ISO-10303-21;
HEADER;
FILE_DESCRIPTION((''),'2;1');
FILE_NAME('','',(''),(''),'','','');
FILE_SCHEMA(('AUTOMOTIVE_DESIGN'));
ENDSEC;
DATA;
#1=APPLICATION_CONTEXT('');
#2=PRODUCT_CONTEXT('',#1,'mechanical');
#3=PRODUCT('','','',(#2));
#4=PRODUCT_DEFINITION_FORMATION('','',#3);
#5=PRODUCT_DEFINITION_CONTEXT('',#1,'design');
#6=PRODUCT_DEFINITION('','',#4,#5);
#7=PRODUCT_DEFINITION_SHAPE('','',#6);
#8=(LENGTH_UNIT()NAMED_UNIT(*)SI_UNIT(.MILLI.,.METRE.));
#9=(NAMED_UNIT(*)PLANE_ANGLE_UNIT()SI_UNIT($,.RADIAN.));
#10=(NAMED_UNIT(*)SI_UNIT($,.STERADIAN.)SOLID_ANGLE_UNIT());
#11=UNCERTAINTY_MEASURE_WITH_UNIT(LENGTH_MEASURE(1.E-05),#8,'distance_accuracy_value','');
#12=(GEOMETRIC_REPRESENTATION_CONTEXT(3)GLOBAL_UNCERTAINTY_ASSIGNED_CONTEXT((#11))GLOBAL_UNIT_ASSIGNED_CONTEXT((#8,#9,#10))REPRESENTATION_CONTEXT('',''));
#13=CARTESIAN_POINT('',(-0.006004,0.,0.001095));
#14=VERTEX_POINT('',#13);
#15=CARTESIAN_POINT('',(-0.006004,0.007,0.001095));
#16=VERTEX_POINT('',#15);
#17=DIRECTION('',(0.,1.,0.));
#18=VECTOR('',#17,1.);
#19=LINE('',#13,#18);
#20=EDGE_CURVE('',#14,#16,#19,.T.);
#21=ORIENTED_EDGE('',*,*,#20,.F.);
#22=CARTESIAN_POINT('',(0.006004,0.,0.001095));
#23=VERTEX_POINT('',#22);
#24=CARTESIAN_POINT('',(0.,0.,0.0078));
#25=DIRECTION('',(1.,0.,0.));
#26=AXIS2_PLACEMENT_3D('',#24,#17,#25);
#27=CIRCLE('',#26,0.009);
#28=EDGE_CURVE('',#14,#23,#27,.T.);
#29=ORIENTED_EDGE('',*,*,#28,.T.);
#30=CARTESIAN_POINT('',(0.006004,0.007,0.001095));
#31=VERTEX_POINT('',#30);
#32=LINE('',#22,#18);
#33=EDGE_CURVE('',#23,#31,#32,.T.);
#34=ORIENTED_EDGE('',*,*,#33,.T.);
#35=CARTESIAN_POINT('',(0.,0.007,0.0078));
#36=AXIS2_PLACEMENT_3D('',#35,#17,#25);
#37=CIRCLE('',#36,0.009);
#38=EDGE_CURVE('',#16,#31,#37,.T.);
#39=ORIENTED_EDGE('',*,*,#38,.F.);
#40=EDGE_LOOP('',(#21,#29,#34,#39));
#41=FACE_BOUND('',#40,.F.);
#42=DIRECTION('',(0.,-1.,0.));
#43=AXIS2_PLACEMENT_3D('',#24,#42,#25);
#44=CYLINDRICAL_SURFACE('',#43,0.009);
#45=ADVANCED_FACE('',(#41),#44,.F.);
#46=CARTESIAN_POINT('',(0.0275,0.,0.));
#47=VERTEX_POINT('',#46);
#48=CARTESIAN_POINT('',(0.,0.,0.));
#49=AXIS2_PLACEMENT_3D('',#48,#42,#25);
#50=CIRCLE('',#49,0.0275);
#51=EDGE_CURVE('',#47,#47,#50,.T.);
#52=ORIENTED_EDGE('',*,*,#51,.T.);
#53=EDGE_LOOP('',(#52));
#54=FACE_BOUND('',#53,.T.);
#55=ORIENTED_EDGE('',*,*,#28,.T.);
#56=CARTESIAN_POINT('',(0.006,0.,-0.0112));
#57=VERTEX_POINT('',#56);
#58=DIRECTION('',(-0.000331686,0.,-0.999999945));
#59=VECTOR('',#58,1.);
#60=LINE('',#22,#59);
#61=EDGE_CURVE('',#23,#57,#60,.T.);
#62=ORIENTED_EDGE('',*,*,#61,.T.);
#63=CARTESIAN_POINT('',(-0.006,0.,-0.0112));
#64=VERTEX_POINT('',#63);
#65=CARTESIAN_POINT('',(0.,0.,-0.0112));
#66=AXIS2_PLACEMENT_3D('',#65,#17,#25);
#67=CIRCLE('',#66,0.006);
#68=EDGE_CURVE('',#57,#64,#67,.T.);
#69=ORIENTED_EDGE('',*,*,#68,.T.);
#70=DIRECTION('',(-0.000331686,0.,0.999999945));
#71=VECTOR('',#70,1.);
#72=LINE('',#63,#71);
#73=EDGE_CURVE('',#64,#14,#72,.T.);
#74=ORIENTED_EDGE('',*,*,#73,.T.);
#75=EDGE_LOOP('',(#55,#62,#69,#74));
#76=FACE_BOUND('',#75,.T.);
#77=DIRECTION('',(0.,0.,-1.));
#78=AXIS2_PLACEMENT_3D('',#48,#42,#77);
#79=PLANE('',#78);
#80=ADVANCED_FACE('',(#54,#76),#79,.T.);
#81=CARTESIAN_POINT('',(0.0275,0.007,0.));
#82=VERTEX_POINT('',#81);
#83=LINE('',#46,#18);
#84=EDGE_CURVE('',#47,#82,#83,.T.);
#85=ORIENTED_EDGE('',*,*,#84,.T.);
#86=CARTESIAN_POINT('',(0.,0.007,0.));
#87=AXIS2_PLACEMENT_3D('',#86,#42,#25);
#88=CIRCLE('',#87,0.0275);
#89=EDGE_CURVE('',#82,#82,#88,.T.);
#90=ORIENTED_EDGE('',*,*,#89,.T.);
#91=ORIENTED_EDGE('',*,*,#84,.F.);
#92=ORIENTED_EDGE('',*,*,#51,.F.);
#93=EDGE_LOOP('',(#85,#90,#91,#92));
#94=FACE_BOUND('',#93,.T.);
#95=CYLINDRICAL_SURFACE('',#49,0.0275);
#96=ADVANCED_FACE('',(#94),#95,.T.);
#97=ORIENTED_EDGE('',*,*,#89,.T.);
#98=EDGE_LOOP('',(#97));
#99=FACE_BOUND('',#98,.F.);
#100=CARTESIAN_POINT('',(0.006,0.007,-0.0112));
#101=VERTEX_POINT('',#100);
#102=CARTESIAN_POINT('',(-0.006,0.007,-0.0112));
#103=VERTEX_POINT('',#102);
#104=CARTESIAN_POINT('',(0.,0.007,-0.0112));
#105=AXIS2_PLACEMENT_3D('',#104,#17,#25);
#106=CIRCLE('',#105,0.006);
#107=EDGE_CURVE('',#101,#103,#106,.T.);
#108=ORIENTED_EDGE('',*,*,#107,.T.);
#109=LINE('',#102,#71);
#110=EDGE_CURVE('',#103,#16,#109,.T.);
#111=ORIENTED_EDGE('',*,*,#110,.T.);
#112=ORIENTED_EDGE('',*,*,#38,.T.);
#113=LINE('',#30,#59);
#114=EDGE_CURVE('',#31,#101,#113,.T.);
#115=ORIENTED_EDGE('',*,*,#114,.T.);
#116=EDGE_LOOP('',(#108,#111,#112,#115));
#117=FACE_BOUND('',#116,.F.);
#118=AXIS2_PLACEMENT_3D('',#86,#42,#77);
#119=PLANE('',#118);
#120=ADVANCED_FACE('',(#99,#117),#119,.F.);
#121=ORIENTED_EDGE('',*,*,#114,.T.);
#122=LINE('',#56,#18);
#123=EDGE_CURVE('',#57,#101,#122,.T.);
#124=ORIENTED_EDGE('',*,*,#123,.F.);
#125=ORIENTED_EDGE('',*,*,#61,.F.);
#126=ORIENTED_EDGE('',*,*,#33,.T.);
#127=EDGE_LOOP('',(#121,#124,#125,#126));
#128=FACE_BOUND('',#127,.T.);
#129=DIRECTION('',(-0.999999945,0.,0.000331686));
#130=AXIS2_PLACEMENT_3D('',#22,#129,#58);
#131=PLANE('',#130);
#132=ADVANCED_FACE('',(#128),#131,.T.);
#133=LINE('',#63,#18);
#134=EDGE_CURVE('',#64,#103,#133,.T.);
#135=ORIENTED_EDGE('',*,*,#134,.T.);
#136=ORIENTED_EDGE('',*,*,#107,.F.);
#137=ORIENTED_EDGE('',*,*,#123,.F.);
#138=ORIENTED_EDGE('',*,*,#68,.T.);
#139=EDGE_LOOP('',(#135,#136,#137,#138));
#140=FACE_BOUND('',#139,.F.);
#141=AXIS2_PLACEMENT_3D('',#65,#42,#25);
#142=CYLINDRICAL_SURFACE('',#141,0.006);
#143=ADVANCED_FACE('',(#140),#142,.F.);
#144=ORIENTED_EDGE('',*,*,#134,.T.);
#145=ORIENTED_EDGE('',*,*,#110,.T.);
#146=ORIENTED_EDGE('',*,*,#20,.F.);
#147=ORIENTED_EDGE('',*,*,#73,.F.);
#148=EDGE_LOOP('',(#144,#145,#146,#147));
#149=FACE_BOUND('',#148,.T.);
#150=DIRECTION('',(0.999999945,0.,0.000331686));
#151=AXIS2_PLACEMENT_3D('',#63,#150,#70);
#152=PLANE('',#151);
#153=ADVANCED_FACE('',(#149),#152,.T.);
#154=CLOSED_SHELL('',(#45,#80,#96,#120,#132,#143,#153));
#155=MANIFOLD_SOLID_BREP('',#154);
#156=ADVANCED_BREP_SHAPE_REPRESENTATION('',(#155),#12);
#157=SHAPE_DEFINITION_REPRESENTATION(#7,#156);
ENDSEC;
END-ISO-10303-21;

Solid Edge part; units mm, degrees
sketch "Sketch1" plane through (0, 0, 0) normal (0, -1, 0) x (1, 0, 0)
  circle A0 centre (0, 0) radius 0.0275
  line L0 (0.006, 0.0011) -> (0.006, -0.0112)
  arc A1 (-0.006, 0.0011) -> (0.006, 0.0011) centre (0, 0.0078) cw
  line L1 (-0.006, -0.0112) -> (-0.006, 0.0011)
  arc A2 (0.006, -0.0112) -> (-0.006, -0.0112) centre (0, -0.0112) cw
extrude "Protrusion1" add sketch "Sketch1" against normal blind 0.007
